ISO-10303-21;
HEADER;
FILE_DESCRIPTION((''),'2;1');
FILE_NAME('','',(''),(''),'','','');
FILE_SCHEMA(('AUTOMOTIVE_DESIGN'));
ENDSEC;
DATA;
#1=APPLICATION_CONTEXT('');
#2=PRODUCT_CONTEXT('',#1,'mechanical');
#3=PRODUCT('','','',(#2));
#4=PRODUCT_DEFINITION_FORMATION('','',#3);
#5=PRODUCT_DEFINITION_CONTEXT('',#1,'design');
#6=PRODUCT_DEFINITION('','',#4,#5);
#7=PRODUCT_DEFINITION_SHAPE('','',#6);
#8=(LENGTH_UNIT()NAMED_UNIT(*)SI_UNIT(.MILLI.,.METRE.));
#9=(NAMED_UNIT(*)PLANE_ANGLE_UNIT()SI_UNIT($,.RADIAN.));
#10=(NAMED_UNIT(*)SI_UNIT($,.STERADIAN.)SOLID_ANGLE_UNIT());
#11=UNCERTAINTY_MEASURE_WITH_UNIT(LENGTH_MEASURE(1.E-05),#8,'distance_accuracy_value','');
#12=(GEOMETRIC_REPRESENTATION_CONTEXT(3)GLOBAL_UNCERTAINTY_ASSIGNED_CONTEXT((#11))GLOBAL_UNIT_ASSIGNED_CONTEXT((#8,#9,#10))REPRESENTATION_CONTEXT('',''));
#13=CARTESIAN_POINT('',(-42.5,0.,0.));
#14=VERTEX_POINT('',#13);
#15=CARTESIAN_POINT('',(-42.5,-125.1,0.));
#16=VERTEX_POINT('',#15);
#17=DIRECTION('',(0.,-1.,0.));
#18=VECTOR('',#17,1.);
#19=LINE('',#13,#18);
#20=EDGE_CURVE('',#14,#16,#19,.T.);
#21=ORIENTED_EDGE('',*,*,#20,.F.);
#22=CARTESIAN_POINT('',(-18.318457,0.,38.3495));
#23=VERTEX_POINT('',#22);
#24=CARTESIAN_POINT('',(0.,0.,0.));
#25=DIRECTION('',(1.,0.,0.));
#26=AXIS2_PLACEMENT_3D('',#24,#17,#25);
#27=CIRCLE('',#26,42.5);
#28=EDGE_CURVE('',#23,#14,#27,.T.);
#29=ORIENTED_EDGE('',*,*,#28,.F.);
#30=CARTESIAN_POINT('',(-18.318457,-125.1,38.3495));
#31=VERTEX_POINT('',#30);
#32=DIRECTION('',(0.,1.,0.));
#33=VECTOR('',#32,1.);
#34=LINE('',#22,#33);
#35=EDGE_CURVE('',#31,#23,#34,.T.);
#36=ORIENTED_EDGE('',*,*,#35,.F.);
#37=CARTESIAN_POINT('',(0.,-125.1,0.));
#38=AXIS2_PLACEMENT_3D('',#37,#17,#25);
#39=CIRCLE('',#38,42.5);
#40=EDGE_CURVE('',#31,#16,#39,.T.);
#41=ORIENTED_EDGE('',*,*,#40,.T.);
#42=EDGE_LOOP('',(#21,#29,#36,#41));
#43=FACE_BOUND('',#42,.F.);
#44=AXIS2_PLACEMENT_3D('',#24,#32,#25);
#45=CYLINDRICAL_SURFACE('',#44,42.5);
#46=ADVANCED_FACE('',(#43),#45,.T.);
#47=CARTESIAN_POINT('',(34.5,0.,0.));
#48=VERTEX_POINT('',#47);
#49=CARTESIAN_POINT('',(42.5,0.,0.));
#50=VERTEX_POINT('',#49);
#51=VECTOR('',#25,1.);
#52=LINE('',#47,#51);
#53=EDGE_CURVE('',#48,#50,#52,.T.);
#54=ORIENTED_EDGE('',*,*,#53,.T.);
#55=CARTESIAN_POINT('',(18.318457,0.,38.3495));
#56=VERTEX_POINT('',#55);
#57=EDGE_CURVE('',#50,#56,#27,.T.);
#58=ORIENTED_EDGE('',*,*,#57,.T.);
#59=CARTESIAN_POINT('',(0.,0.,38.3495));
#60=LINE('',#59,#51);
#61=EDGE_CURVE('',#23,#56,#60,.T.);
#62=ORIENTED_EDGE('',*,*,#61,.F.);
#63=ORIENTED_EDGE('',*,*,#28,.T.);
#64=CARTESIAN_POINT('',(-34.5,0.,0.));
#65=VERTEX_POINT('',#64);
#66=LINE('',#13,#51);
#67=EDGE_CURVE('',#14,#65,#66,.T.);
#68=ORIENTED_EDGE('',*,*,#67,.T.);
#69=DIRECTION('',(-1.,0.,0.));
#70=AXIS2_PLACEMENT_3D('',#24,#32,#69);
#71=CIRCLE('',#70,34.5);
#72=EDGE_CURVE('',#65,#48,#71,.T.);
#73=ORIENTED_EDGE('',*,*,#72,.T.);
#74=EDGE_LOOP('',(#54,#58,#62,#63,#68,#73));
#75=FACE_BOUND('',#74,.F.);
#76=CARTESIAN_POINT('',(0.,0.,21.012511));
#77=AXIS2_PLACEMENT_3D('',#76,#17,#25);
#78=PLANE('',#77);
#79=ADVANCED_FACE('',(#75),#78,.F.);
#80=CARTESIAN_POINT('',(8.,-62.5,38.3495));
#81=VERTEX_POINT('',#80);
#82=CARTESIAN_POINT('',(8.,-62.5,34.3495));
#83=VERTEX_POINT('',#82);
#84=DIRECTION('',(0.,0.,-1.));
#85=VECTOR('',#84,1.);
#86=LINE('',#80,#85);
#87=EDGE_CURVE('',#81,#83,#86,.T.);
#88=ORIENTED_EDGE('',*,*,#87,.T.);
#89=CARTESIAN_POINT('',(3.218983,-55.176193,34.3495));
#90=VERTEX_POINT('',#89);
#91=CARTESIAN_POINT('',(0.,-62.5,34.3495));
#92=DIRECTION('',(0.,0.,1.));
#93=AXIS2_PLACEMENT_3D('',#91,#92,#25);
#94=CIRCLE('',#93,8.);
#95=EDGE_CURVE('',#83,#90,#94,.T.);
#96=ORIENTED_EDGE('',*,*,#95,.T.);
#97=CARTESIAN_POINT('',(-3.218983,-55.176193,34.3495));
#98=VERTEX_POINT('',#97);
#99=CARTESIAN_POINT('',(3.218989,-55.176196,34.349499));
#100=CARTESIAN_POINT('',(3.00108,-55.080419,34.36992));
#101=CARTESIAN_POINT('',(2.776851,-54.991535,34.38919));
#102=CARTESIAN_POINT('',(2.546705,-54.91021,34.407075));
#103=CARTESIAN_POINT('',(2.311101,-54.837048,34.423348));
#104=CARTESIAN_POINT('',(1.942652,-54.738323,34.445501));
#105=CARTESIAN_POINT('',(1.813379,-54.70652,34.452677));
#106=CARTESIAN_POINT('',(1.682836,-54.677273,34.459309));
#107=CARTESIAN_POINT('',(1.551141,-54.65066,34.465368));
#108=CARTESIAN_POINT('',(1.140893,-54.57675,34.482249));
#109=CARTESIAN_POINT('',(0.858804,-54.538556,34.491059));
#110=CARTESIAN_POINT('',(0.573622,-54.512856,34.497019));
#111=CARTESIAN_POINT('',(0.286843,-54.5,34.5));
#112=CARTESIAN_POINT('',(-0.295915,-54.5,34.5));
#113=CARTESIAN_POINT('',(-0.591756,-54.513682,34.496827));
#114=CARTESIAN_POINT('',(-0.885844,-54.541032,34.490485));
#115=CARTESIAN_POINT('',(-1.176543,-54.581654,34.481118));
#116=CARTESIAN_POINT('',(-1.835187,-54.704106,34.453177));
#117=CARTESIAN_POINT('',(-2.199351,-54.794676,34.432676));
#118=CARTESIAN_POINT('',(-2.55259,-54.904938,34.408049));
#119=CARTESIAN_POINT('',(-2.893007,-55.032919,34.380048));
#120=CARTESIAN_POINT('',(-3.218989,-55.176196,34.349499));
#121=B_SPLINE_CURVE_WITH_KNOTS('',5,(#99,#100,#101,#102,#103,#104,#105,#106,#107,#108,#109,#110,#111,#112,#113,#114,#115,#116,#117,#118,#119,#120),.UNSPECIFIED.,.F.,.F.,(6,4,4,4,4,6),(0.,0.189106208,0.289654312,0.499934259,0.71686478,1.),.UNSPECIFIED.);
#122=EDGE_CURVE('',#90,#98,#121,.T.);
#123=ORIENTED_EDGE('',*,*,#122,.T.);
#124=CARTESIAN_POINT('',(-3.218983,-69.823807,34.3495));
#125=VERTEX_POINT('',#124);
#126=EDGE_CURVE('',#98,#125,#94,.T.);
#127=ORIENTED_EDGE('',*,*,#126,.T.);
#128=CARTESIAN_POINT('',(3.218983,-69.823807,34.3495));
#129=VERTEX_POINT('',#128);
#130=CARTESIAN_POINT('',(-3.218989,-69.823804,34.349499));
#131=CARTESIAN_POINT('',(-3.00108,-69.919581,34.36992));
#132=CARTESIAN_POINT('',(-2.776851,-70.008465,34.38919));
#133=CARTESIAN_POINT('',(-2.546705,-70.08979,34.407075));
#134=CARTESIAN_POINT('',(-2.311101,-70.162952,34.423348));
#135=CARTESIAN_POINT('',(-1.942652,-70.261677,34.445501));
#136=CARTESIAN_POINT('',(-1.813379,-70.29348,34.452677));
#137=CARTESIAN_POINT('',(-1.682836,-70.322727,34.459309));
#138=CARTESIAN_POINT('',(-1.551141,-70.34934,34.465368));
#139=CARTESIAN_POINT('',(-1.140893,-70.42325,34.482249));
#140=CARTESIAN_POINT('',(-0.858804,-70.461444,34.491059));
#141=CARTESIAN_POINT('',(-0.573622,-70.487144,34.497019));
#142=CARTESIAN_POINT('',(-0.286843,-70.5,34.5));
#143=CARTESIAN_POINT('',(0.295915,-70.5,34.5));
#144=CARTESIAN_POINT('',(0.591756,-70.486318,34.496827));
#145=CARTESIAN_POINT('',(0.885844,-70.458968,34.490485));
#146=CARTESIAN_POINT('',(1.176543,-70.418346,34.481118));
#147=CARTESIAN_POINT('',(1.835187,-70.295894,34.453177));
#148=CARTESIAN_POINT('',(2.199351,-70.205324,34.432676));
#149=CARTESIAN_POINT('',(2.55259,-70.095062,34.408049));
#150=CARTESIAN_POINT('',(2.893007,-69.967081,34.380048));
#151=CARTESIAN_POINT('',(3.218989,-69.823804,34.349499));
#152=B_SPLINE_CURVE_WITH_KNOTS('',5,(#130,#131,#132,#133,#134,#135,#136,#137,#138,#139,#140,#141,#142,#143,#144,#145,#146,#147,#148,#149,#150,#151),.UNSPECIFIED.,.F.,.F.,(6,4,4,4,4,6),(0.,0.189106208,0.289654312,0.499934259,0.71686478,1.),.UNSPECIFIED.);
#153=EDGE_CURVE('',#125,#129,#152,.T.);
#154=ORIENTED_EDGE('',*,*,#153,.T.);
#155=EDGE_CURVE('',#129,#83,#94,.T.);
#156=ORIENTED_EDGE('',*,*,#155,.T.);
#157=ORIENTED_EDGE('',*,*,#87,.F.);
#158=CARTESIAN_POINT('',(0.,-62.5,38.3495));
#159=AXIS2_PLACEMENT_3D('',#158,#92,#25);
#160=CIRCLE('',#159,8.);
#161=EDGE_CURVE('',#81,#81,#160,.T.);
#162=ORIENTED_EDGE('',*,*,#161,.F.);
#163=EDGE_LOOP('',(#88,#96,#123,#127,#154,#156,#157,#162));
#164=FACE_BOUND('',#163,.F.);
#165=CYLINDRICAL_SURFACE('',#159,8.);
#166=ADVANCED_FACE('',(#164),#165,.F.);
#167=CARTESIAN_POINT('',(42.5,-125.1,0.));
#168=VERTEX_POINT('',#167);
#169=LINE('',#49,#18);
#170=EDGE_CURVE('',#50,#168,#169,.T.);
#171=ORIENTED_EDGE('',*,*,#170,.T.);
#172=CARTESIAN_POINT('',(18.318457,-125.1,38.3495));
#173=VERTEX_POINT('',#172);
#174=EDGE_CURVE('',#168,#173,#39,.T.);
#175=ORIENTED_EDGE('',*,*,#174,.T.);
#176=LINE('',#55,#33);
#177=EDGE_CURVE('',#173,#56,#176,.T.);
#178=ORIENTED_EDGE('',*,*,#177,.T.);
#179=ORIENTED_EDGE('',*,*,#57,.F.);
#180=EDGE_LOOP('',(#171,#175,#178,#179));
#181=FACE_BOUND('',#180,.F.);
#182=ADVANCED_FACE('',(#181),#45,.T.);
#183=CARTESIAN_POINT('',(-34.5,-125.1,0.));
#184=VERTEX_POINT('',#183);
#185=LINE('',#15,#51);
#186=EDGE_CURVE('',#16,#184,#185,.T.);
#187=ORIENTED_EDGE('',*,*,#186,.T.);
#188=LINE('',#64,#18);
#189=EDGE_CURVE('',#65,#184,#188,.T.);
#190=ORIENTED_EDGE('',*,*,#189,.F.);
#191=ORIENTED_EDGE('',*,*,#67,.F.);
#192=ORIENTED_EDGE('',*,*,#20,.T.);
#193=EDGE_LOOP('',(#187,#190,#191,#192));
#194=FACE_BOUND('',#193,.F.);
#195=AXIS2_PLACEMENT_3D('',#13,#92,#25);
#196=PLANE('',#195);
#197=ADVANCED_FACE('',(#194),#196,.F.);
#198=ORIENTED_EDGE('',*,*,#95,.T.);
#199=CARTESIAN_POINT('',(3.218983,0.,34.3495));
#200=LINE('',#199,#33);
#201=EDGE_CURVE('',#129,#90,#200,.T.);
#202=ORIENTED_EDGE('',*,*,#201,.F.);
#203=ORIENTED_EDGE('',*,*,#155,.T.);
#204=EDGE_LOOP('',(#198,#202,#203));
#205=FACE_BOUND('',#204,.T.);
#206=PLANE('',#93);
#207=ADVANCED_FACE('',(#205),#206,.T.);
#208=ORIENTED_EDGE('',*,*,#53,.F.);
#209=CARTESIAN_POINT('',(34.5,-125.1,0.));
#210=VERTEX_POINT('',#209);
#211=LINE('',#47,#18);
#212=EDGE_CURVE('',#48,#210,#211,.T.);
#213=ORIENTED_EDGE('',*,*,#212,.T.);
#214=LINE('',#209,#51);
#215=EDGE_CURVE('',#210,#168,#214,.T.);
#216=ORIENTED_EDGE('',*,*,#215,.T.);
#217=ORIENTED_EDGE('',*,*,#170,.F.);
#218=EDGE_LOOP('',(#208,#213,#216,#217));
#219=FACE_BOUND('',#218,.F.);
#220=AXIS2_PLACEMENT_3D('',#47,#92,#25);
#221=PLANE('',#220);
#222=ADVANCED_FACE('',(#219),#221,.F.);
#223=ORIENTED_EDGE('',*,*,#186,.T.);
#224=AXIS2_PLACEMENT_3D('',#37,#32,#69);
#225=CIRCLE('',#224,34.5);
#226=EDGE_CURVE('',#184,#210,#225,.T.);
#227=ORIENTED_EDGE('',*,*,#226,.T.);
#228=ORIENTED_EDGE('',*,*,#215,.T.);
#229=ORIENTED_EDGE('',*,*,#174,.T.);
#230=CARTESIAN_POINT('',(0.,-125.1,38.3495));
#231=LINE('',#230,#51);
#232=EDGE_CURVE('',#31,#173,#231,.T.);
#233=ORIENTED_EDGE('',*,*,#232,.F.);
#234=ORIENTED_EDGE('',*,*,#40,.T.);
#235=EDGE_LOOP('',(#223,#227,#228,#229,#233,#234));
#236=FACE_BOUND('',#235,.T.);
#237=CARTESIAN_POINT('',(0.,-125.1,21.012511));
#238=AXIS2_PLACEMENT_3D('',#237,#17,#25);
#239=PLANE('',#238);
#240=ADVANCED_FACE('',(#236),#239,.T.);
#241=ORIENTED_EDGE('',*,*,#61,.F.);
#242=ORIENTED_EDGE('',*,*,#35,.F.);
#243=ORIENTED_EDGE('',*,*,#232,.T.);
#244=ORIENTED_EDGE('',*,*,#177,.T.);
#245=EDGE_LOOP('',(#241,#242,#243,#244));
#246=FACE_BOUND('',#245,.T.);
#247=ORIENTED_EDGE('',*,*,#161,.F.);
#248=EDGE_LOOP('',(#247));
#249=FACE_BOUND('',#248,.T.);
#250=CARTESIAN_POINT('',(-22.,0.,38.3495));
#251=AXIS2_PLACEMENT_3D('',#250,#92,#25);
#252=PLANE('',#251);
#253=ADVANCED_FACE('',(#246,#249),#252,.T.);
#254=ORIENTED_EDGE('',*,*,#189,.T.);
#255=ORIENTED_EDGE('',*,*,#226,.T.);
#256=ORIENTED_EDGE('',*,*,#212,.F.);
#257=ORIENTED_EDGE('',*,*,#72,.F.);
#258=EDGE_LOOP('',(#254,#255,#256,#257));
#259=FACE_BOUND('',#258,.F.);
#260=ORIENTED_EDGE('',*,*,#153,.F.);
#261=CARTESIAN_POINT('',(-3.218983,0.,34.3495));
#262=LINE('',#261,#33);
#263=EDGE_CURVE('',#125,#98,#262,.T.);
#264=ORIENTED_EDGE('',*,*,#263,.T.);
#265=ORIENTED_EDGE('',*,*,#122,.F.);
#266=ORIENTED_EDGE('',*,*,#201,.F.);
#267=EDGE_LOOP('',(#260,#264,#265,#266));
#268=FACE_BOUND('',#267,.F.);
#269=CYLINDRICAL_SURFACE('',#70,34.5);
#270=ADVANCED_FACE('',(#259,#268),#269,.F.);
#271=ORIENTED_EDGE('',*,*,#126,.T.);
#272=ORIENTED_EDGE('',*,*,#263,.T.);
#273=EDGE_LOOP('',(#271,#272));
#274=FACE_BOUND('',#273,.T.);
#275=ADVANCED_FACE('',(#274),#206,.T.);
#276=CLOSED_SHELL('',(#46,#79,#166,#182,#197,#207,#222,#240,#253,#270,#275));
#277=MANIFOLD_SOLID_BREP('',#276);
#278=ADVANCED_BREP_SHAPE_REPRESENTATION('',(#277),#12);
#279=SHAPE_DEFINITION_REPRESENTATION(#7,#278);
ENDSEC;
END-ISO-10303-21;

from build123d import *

# Parameters (mm, degrees)
F1_DEPTH = 125.1
F2_W     = 44
F2_H     = 7.301
F3_DEPTH = 125.1
F4_R     = 8
F5_DEPTH = 4


with BuildPart() as f1:
    # F0 (on Front) → F1 (new body)
    with BuildSketch(Plane.XZ):
        with BuildLine():
            ThreePointArc((-34.5, 0), (0, 34.5), (34.5, 0))
            Line((34.5, 0), (42.5, 0))
            ThreePointArc((42.5, 0), (0, 42.5), (-42.5, 0))
            Line((-42.5, 0), (-34.5, 0))
        make_face()
    extrude(amount=F1_DEPTH)

    # F2 (on Front) → F3 (cut)
    with BuildSketch(Plane.XZ):
        with Locations((0, 42)):
            Rectangle(F2_W, F2_H)
    extrude(amount=F3_DEPTH, mode=Mode.SUBTRACT)

    # F4 (on face) → F5 (cut)
    with BuildSketch(Plane.XY.offset(38.3495)):
        with Locations((0, -62.5)):
            Circle(F4_R)
    extrude(amount=-F5_DEPTH, mode=Mode.SUBTRACT)


solid = f1.part
